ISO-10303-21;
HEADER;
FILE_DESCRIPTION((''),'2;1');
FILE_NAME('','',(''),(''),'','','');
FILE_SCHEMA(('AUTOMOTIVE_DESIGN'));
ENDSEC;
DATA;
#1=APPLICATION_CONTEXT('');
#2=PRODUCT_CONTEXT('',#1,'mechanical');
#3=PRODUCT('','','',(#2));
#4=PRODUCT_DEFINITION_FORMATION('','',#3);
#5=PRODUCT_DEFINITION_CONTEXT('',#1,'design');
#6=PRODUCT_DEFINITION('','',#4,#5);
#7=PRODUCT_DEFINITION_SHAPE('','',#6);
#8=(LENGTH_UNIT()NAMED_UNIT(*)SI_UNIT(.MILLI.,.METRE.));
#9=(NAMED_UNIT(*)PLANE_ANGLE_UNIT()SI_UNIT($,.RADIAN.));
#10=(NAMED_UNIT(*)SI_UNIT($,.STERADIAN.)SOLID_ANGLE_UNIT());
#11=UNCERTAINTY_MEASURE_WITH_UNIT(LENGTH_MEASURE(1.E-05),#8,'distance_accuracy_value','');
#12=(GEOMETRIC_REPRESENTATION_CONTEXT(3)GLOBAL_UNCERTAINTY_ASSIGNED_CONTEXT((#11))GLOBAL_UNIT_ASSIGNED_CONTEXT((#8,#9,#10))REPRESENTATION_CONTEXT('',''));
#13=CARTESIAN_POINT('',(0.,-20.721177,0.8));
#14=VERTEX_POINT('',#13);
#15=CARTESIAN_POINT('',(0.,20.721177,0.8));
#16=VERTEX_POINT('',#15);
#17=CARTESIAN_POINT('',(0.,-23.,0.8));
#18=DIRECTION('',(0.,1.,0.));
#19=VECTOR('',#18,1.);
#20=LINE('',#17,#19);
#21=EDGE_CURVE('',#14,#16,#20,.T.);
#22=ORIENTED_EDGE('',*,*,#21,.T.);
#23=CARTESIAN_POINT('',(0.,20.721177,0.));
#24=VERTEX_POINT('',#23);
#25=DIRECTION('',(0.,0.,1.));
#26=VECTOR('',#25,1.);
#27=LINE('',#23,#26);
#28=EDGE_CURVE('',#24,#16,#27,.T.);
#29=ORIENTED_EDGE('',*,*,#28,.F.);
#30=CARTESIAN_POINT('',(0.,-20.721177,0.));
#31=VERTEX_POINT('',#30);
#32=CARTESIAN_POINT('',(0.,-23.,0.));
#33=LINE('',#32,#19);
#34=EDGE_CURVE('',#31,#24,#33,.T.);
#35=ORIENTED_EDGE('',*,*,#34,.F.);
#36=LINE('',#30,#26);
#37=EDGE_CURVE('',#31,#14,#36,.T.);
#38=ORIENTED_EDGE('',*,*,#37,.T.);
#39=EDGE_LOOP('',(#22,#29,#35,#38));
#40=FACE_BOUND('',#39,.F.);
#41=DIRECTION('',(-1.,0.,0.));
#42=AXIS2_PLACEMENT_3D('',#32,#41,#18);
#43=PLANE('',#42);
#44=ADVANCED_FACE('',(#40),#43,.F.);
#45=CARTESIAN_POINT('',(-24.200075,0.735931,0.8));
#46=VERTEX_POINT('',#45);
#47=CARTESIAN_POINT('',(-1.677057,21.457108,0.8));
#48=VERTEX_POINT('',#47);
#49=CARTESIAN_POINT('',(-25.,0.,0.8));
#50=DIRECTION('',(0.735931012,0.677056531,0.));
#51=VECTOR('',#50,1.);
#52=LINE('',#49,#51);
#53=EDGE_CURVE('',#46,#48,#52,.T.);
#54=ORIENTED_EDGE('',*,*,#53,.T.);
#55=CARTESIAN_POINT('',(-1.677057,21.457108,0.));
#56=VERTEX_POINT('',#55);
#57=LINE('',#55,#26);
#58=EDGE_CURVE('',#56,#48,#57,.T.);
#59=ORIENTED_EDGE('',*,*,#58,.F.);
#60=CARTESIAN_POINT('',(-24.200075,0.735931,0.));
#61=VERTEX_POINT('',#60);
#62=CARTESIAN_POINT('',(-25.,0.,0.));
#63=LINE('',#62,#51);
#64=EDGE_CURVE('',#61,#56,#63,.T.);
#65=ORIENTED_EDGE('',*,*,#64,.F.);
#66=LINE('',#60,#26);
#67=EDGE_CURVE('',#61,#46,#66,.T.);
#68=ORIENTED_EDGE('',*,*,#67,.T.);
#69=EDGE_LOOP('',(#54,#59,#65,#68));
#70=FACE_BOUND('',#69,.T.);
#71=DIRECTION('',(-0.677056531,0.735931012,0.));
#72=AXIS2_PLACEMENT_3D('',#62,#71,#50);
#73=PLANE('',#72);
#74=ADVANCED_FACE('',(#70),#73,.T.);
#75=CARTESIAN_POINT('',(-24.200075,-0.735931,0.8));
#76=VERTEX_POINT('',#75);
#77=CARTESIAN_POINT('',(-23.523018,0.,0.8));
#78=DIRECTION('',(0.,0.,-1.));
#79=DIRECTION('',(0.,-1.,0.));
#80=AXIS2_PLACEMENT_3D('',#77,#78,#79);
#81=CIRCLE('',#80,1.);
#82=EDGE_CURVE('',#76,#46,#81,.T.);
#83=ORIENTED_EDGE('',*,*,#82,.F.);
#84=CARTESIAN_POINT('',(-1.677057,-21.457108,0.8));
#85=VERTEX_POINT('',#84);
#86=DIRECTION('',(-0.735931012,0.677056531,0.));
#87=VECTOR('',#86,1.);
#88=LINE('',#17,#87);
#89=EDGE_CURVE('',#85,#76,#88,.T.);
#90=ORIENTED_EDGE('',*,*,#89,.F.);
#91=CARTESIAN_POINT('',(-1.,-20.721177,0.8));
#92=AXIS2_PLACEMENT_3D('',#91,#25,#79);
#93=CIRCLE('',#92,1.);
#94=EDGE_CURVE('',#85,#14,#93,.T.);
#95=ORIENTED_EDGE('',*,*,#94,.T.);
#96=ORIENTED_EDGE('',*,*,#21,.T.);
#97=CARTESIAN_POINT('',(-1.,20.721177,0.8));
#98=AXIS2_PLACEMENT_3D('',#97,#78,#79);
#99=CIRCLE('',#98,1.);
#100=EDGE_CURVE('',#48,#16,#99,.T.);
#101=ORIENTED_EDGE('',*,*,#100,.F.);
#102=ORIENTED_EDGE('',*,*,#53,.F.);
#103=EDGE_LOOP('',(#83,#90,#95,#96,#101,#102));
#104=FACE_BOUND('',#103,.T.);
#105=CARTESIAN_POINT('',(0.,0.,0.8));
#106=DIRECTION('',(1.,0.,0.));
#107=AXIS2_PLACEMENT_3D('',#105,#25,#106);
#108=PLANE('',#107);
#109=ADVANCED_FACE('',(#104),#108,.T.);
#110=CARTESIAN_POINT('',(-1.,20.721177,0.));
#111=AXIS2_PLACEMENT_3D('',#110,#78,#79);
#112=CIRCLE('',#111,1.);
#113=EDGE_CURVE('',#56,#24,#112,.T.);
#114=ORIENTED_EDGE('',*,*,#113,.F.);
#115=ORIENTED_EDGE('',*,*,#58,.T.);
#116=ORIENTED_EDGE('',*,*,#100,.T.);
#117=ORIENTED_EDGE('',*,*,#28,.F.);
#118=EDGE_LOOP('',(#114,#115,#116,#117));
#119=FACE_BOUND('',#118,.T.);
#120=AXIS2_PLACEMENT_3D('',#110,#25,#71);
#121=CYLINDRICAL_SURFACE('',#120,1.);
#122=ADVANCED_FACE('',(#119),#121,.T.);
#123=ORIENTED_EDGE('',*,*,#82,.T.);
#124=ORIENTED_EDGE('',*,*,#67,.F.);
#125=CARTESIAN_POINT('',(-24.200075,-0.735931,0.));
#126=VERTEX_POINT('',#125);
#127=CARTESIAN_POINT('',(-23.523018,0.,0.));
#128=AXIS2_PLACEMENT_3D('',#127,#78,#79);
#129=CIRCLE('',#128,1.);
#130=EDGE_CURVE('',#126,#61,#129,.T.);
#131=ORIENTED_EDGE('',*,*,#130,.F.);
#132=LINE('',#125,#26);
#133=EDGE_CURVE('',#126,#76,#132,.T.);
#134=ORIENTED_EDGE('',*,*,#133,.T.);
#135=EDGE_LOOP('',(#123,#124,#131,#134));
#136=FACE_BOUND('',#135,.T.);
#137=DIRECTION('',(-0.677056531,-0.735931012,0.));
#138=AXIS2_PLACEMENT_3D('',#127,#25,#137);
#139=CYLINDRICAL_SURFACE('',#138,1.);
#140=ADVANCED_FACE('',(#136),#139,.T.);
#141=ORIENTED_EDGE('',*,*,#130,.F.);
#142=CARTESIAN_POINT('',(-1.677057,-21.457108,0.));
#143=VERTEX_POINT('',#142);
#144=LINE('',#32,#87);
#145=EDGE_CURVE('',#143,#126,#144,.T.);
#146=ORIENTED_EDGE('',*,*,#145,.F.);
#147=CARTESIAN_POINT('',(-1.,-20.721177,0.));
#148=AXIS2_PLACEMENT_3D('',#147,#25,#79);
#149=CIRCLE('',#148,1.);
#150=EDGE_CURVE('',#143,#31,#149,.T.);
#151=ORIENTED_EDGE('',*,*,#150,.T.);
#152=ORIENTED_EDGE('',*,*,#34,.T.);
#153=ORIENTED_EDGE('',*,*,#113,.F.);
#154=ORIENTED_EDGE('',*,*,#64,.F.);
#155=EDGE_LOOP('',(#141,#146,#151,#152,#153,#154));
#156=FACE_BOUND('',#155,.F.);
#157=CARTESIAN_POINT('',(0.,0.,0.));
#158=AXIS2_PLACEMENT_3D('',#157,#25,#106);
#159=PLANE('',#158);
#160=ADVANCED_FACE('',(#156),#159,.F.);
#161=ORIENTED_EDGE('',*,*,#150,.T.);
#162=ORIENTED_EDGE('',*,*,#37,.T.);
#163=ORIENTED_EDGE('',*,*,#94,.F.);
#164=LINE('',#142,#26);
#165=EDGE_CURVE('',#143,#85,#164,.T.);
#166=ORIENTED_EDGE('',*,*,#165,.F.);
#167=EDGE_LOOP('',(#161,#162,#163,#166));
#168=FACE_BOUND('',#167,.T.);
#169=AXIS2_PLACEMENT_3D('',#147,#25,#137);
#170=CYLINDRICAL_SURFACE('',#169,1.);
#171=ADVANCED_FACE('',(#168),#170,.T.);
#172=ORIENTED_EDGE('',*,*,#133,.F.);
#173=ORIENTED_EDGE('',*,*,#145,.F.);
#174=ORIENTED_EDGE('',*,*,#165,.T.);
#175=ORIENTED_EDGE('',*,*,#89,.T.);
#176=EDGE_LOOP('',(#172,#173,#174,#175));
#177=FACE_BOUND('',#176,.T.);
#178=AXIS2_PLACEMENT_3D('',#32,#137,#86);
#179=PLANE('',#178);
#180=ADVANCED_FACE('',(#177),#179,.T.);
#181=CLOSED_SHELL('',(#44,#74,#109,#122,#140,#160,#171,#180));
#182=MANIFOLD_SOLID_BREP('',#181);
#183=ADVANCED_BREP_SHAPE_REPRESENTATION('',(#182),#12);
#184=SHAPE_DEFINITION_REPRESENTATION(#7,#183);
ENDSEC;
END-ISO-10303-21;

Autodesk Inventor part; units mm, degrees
ref_plane "YZ Plane" through (0, 0, 0) normal (1, 0, 0) x (0, 1, 0)
ref_plane "XZ Plane" through (0, 0, 0) normal (0, 1, 0) x (-1, 0, 0)
ref_plane "XY Plane" through (0, 0, 0) normal (0, 0, 1) x (1, 0, 0)
sketch "Sketch1" plane through (0, 0, 0) normal (0, 0, 1) x (1, 0, 0)
  line L0 (0, -23) -> (0, 23)
  line L1 (0, -23) -> (-25, 0)
  line L2 (-25, 0) -> (0, 23)
  point P0 (0, 0)
  point P1 (0, 0)
  point P2 (0, 0)
  dimension "d1" = 46
  dimension "d9" = 25
extrude "Plate1" add sketch "Sketch1" along normal blind 0.8
fillet "Corner Round2" radius 1 3 edges at (0, -23, 0.4) (-25, 0, 0.4) (0, 23, 0.4)
equation "\"d2\" = Thickness"
equation "\"BendReliefWidth\" = Thickness"
equation "\"BendReliefDepth\" = 0.5 * Thickness"
equation "\"CornerReliefSize\" = 4 * Thickness"
equation "\"MinimumRemnant\" = 2 * Thickness"
equation "\"TransitionRadius\" = BendRadius"
equation "\"JacobiRadiusSize\" = BendRadius"
equation "\"GapSize\" = Thickness"
equation "\"Thickness\" = 0.8"
equation "\"BendRadius\" = 2.75"
properties part number "DS-B-503 CAP" material "Stainless Steel"
